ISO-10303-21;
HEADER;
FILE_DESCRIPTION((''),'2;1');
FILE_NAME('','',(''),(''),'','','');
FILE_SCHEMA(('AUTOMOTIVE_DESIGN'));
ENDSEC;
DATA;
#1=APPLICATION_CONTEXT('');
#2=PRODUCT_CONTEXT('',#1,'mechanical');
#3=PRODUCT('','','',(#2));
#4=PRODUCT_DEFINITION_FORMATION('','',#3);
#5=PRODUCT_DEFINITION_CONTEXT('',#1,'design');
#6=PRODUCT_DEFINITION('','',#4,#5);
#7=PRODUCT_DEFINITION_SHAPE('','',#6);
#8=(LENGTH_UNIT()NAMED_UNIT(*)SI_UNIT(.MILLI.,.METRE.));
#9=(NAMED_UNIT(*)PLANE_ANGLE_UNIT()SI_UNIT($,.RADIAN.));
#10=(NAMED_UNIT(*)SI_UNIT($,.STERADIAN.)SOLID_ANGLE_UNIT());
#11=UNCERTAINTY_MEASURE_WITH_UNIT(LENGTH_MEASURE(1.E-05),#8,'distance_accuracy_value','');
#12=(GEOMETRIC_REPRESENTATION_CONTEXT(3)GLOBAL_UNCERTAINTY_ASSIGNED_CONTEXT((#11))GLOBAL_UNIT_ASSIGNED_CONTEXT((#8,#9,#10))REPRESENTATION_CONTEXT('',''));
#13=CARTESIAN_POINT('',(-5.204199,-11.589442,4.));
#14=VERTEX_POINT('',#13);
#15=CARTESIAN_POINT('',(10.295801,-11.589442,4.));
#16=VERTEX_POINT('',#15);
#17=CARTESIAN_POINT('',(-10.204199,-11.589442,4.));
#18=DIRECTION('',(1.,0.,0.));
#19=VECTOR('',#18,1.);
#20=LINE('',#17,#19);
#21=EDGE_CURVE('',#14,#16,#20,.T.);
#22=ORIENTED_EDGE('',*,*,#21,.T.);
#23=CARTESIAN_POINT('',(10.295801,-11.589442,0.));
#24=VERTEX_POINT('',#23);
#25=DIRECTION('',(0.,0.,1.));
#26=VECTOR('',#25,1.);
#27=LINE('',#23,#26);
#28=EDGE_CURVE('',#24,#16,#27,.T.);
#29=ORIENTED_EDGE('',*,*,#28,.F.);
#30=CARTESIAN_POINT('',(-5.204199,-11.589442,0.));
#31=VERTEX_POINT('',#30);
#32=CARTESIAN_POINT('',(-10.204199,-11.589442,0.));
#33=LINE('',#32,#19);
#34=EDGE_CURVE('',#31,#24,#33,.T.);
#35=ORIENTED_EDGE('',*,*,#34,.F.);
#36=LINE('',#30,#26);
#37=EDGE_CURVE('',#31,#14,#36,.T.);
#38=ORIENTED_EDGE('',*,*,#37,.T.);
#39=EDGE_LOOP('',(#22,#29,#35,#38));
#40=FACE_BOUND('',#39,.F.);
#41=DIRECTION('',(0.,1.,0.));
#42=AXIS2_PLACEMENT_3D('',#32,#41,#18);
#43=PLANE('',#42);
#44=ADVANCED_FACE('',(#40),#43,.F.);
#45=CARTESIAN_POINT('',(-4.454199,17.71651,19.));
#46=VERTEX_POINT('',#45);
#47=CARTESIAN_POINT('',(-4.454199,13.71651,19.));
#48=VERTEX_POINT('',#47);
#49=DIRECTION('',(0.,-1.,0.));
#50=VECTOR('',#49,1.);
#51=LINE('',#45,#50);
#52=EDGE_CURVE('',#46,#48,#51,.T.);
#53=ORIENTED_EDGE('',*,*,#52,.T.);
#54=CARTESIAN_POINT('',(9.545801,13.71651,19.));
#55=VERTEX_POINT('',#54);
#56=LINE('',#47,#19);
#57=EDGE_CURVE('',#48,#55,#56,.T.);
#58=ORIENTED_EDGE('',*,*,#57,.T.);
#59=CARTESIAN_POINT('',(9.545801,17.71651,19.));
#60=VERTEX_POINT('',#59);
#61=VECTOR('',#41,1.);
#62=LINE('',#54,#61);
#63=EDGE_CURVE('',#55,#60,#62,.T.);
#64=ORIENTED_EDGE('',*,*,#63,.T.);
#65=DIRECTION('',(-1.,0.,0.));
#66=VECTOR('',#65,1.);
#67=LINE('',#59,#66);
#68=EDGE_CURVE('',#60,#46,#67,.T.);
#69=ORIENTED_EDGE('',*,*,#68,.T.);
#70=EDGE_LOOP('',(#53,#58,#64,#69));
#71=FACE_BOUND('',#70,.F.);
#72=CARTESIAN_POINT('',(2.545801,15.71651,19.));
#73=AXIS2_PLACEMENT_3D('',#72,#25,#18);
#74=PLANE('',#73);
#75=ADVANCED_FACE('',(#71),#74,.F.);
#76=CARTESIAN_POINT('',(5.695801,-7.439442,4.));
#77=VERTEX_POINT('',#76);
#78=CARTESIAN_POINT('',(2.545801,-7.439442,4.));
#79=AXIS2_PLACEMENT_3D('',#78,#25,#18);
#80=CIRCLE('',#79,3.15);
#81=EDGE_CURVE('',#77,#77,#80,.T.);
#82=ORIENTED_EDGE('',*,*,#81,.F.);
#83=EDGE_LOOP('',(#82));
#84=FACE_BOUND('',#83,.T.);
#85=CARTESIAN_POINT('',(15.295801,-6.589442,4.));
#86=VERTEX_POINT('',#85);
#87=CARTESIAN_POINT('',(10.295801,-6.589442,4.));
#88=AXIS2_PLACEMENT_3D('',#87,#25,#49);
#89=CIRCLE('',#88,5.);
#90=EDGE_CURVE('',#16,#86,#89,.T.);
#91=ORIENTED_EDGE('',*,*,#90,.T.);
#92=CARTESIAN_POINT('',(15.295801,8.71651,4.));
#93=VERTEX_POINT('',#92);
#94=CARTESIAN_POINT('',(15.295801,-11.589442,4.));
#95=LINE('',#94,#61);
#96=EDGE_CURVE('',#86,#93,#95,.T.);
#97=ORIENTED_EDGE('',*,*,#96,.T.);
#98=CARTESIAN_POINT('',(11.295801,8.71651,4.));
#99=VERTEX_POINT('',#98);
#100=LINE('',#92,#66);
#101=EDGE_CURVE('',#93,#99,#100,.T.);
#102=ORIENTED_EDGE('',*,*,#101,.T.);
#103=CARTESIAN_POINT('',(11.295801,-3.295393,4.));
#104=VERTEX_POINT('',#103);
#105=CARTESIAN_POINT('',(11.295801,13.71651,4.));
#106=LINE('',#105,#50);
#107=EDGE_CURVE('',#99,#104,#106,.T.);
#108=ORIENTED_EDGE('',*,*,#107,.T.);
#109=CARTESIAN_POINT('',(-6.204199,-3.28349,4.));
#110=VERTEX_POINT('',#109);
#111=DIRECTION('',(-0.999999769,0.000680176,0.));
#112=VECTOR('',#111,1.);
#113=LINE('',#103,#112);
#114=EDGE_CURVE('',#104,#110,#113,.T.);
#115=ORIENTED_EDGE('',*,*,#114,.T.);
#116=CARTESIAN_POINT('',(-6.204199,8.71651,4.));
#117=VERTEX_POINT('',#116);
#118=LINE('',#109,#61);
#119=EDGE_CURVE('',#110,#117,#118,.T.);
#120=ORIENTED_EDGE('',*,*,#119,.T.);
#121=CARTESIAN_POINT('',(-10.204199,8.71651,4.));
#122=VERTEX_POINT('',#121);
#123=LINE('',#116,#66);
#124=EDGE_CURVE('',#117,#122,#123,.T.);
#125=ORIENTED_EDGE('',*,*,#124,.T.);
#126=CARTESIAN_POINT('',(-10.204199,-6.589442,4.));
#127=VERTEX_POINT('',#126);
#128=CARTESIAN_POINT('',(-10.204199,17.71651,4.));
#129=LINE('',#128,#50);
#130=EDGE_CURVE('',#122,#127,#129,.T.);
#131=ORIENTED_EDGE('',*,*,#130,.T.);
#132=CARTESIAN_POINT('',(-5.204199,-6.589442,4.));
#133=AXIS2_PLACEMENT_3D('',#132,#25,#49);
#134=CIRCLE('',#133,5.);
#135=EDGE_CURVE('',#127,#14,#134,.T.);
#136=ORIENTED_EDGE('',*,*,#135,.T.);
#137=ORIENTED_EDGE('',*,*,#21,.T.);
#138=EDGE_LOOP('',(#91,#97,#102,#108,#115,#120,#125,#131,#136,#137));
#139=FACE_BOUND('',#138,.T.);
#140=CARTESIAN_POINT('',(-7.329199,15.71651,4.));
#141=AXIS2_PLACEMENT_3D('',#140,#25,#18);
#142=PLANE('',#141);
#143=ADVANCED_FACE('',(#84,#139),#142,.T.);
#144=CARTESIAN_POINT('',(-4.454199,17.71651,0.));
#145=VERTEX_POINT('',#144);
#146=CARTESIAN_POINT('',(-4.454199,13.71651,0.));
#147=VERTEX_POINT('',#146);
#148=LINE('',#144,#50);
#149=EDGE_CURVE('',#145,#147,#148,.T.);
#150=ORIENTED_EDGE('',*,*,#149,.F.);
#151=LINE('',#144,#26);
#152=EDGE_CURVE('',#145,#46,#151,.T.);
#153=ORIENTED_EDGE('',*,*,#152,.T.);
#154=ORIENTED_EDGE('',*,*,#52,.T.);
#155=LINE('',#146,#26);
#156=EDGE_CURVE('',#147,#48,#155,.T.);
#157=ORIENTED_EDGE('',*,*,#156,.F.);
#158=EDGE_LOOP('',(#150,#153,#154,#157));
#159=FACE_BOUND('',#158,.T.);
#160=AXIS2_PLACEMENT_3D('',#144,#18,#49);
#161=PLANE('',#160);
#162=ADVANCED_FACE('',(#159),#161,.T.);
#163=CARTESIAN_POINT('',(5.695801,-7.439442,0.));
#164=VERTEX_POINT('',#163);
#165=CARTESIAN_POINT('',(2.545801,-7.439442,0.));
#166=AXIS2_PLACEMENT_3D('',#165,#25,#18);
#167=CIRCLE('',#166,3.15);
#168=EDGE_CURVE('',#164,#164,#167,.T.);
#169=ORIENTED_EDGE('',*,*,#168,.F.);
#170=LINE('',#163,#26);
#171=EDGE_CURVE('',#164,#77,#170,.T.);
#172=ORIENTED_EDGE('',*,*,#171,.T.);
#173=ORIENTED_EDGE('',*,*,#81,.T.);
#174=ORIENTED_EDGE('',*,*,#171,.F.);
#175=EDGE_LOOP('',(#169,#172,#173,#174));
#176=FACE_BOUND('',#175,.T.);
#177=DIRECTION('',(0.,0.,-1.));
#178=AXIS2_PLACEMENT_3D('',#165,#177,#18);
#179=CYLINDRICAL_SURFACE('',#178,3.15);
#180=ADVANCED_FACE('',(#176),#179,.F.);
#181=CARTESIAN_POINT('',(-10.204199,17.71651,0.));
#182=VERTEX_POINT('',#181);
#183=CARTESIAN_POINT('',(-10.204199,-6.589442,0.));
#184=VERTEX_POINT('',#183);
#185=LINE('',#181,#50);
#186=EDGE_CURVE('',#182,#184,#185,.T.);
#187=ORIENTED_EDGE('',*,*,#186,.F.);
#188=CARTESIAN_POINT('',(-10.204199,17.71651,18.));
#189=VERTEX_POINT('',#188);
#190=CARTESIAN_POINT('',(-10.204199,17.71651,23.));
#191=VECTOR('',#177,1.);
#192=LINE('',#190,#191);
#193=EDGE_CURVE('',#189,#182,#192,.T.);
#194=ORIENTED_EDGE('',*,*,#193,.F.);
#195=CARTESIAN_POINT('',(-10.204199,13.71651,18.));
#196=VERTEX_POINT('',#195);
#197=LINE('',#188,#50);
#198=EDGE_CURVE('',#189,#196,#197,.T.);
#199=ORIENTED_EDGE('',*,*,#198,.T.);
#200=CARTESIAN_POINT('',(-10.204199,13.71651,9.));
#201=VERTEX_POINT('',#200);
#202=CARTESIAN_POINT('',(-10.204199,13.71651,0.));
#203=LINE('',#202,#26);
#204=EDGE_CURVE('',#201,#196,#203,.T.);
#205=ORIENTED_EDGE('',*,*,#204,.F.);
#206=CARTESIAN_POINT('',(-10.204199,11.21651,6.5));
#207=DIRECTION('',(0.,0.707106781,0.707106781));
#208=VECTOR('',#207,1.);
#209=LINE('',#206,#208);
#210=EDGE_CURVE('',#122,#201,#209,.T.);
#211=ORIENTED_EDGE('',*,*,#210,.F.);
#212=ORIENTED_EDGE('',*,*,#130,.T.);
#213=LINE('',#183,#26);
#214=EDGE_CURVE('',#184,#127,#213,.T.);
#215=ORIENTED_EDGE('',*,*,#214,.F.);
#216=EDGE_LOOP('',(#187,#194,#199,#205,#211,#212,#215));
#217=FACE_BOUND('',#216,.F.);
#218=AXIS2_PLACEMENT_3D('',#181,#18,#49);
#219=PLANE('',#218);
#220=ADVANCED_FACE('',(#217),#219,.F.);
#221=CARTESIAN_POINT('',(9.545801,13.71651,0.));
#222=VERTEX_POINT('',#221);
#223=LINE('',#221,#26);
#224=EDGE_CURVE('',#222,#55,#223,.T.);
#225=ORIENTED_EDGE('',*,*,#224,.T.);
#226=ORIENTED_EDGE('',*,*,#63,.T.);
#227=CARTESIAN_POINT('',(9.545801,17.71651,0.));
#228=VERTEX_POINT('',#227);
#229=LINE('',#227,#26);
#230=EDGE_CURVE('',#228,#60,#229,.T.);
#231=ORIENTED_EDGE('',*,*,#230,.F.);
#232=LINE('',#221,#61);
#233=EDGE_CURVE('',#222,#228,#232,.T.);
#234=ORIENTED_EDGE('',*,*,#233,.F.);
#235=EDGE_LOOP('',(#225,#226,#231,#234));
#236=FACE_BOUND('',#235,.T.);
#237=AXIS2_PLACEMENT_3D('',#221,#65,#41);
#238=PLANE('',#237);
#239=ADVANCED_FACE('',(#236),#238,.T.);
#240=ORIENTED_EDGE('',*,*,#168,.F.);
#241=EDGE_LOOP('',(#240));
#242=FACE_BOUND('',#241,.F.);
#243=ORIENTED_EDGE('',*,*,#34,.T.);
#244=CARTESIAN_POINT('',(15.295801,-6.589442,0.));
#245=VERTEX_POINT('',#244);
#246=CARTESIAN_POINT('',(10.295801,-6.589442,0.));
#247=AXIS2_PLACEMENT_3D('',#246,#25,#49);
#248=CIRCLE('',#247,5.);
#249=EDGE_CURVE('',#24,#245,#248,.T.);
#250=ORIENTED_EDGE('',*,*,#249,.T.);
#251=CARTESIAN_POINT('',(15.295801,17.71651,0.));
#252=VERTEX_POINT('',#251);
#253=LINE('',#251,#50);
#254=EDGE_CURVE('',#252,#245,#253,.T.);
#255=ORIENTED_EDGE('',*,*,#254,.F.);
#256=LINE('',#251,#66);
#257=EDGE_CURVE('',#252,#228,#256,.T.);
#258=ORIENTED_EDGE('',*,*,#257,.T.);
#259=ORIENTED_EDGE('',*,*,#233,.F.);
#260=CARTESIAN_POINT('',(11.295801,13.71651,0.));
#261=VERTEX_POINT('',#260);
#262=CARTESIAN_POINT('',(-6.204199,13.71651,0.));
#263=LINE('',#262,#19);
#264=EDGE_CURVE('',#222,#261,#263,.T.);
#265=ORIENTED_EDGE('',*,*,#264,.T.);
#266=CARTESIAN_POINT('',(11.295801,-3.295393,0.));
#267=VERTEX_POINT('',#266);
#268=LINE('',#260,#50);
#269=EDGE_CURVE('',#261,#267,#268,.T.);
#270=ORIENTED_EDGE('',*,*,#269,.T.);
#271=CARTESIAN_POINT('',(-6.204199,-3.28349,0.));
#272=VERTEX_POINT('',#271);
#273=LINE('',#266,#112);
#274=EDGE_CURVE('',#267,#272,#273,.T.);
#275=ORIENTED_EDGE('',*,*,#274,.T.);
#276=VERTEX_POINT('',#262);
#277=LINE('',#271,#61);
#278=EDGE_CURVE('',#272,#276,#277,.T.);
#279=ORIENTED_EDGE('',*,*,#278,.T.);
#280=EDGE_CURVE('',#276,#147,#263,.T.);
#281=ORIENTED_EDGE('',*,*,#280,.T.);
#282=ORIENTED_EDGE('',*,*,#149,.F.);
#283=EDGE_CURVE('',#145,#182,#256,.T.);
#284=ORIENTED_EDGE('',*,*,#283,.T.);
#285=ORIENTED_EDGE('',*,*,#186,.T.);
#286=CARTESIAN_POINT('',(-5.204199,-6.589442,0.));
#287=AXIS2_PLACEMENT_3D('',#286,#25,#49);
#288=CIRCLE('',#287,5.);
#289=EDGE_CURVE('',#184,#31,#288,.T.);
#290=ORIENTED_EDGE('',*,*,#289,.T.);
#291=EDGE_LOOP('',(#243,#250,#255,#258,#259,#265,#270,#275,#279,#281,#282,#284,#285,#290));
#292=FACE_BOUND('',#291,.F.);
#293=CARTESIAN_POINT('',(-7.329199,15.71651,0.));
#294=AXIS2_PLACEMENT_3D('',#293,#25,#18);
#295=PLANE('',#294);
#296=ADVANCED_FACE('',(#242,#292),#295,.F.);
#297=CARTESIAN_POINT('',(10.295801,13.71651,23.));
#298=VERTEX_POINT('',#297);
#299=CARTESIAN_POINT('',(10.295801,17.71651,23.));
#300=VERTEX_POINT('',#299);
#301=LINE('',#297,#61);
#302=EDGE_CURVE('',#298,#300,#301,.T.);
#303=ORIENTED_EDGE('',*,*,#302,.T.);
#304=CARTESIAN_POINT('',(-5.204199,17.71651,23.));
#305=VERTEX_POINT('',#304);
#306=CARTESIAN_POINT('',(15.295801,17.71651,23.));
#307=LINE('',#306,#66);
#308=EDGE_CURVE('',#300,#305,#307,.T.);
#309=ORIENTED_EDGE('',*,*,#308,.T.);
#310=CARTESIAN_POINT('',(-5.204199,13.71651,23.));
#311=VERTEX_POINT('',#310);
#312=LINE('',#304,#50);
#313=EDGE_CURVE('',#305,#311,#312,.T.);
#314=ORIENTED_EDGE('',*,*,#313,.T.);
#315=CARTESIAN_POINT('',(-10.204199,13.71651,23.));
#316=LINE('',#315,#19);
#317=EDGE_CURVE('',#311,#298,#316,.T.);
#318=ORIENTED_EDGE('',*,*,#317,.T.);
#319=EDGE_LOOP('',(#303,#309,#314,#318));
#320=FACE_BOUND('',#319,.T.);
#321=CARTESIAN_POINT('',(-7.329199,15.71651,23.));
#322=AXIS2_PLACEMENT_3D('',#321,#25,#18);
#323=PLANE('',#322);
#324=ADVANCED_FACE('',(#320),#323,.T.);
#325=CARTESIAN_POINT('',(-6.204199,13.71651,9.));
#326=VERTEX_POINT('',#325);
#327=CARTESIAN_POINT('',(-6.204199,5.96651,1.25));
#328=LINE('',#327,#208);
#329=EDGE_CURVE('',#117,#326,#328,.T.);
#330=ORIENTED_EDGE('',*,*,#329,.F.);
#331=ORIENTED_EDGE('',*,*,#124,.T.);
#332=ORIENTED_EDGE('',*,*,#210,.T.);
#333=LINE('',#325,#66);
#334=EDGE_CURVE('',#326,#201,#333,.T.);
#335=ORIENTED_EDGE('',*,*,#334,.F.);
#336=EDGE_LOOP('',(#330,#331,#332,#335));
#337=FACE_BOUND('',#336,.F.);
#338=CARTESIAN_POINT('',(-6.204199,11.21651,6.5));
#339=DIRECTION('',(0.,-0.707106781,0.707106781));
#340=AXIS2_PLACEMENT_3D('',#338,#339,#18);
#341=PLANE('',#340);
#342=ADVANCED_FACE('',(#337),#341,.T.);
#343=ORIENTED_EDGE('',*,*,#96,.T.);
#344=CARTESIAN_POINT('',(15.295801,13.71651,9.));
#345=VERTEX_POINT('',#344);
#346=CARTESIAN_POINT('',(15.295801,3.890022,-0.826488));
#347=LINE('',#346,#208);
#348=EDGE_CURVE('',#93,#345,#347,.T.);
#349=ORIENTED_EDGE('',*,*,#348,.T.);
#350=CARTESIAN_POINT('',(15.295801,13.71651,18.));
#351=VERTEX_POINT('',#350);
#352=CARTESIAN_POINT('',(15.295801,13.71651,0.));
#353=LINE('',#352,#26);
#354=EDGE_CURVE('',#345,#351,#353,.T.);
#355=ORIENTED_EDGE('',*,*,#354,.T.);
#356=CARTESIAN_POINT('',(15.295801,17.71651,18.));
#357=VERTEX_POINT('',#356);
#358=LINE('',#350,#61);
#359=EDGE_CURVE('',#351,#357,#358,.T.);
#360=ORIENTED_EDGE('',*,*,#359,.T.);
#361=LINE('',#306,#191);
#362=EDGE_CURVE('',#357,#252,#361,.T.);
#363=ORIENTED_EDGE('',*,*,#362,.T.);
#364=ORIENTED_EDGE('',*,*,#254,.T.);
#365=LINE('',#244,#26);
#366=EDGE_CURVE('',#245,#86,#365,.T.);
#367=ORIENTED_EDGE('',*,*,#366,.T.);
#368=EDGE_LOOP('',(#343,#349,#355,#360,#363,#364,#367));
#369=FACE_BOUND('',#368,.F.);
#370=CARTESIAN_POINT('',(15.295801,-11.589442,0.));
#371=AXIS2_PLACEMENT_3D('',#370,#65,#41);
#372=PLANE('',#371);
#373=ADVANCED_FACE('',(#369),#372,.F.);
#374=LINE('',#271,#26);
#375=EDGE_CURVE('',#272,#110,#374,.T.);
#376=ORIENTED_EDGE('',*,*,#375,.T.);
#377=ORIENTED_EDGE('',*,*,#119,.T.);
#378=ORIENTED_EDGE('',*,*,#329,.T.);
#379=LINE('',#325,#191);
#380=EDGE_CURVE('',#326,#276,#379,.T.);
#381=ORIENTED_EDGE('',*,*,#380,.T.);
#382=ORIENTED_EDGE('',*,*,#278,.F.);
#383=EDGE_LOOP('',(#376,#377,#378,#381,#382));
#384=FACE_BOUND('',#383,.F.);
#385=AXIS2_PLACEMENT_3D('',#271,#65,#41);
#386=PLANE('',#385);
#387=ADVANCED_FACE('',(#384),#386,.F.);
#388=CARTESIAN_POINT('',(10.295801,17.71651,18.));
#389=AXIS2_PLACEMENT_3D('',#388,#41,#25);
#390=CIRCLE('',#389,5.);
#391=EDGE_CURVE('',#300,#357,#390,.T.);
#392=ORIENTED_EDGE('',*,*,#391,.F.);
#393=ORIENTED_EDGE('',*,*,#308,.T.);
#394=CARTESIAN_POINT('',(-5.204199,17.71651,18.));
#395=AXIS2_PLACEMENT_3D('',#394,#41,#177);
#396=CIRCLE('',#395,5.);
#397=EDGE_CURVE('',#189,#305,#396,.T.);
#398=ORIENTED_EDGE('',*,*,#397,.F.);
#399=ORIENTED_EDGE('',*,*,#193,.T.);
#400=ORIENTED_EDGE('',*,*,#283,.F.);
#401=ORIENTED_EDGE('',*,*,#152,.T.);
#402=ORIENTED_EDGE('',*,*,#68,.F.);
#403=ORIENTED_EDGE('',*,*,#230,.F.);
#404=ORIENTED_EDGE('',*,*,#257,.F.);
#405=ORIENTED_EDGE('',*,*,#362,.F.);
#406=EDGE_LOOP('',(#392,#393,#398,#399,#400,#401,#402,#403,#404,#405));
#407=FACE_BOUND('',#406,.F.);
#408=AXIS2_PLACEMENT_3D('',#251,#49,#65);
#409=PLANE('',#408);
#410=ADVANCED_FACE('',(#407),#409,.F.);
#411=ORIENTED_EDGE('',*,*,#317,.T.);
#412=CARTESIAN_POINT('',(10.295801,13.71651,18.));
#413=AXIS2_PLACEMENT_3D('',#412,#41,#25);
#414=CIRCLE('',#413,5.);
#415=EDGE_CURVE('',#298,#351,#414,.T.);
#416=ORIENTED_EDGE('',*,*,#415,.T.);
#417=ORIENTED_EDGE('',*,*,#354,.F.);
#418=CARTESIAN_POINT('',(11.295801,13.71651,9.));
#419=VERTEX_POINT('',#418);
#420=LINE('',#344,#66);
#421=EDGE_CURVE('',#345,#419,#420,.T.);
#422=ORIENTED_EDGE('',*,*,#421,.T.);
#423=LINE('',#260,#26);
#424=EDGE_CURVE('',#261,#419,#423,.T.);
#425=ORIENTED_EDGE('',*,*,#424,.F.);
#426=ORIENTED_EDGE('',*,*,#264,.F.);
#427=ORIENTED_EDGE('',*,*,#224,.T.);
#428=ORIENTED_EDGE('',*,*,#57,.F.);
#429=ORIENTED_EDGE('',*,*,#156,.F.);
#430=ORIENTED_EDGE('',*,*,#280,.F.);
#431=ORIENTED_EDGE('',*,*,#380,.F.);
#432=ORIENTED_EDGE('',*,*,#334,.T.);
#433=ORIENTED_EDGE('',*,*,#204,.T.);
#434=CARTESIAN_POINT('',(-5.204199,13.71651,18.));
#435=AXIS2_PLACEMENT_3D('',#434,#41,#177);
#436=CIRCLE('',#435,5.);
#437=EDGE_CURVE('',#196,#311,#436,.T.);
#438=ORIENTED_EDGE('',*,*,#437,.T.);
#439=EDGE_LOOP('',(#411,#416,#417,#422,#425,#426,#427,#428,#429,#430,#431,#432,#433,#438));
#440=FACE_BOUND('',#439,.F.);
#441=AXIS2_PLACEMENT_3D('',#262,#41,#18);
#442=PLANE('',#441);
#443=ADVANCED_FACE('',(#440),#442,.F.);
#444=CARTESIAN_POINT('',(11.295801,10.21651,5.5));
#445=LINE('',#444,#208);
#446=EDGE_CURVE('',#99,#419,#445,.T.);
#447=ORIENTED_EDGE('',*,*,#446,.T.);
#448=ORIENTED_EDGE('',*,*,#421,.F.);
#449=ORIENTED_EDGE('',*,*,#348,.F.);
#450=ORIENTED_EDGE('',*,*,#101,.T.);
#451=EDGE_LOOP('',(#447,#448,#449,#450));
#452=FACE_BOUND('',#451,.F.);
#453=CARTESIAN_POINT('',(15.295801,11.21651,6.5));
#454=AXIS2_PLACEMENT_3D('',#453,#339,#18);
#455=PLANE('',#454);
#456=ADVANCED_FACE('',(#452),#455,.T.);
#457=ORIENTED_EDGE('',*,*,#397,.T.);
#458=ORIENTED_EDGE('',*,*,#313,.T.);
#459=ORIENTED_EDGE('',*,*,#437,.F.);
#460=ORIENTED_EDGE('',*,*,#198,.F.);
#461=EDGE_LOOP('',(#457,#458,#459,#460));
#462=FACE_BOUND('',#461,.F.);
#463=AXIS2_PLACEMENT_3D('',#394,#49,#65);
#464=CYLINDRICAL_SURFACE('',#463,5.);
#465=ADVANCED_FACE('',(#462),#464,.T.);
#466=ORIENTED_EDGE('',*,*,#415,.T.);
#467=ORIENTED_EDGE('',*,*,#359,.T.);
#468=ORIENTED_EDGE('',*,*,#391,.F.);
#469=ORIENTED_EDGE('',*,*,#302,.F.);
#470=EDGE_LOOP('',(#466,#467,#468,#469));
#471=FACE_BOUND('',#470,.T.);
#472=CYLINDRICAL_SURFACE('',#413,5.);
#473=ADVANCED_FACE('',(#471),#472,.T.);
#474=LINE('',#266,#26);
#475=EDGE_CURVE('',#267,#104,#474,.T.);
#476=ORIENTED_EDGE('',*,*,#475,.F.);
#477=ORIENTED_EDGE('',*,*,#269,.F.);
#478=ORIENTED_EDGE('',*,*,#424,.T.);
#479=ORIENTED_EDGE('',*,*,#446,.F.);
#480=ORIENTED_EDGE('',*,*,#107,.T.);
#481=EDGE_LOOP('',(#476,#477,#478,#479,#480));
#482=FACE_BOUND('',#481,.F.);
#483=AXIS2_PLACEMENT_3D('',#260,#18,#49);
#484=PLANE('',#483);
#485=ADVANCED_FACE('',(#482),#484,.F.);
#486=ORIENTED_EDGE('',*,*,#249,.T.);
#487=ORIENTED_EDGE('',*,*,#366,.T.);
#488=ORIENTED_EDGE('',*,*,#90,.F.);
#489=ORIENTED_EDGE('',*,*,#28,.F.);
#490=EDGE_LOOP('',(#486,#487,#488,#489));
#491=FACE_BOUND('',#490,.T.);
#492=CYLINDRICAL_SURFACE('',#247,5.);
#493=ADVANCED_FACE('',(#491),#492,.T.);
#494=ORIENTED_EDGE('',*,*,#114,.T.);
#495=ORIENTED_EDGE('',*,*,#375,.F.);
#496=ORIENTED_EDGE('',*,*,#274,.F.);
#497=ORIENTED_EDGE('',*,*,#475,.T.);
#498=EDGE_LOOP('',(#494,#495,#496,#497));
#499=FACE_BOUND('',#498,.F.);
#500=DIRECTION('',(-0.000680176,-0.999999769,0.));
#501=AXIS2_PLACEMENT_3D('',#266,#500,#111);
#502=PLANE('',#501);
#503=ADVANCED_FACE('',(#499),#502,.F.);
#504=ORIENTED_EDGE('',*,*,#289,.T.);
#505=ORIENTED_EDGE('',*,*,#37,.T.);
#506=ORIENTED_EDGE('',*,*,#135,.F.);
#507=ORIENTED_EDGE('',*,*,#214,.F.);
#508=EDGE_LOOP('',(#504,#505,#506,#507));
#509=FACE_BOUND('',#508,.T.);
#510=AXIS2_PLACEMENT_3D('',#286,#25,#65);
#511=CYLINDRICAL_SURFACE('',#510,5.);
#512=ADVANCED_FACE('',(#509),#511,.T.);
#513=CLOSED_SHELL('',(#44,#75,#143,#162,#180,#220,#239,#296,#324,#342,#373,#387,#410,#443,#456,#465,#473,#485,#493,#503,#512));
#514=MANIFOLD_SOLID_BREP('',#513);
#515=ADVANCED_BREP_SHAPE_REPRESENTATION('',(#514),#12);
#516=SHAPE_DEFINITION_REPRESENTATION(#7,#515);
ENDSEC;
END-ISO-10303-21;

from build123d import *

# Parameters (mm, degrees)
F1_R     = 3.15
F2_DEPTH = 4
F3_DEPTH = 23
F4_DEPTH = 19
F5_R     = 5
F6_SIZE  = 5


# Not quite as in the source:
# - a feature names something its author has since deleted; it is built from what else it names


with BuildPart() as f2:
    # F1 (on Top) → F2 (new body)
    with BuildSketch(Plane.XY):
        Polygon((-4.4541987248, 17.7165100388), (-10.2041987248, 17.7165100388), (-10.2041987248, 13.7165100388), (-6.2041987248, 13.7165100388), (-4.4541987248, 13.7165100388), align=None)
        Polygon((-6.2041987248, 13.7165100388), (-10.2041987248, 13.7165100388), (-10.2041987248, -11.5894424588), (15.2958012752, -11.5894424588), (15.2958012752, 13.7165100388), (11.2958012752, 13.7165100388), (11.2958012752, -3.2953930364), (-6.2041987248, -3.2834899612), align=None)
        with Locations((2.5458012752, -7.4394424588)):
            Circle(F1_R, mode=Mode.SUBTRACT)
        Polygon((9.5458012752, 17.7165100388), (-4.4541987248, 17.7165100388), (-4.4541987248, 13.7165100388), (-3.9542341456, 13.7165100388), (9.5458012752, 13.7165100388), align=None)
        Polygon((15.2958012752, 17.7165100388), (9.5458012752, 17.7165100388), (9.5458012752, 13.7165100388), (11.2958012752, 13.7165100388), (15.2958012752, 13.7165100388), align=None)
    extrude(amount=F2_DEPTH)

    # F1 (on Top) → F3 (join)
    with BuildSketch(Plane.XY):
        Polygon((-4.4541987248, 17.7165100388), (-10.2041987248, 17.7165100388), (-10.2041987248, 13.7165100388), (-6.2041987248, 13.7165100388), (-4.4541987248, 13.7165100388), align=None)
        Polygon((9.5458012752, 17.7165100388), (-4.4541987248, 17.7165100388), (-4.4541987248, 13.7165100388), (-3.9542341456, 13.7165100388), (9.5458012752, 13.7165100388), align=None)
        Polygon((15.2958012752, 17.7165100388), (9.5458012752, 17.7165100388), (9.5458012752, 13.7165100388), (11.2958012752, 13.7165100388), (15.2958012752, 13.7165100388), align=None)
    extrude(amount=F3_DEPTH)

    # F1 (on Top) → F4 (cut)
    with BuildSketch(Plane.XY):
        Polygon((9.5458012752, 17.7165100388), (-4.4541987248, 17.7165100388), (-4.4541987248, 13.7165100388), (-3.9542341456, 13.7165100388), (9.5458012752, 13.7165100388), align=None)
    extrude(amount=F4_DEPTH, mode=Mode.SUBTRACT)

    # F5
    f5_edges = [f2.edges().sort_by_distance(p)[0] for p in [
        (-10.204199, -11.589442, 2),
        (15.295801, -11.589442, 2),
        (15.295801, 15.71651, 23),
        (-10.204199, 15.71651, 23),
    ]]
    fillet(f5_edges, radius=F5_R)

    # F6
    f6_edges = [f2.edges().sort_by_distance(p)[0] for p in [
        (-8.204199, 13.71651, 4),
        (13.295801, 13.71651, 4),
    ]]
    chamfer(f6_edges, length=F6_SIZE)


solid = f2.part
